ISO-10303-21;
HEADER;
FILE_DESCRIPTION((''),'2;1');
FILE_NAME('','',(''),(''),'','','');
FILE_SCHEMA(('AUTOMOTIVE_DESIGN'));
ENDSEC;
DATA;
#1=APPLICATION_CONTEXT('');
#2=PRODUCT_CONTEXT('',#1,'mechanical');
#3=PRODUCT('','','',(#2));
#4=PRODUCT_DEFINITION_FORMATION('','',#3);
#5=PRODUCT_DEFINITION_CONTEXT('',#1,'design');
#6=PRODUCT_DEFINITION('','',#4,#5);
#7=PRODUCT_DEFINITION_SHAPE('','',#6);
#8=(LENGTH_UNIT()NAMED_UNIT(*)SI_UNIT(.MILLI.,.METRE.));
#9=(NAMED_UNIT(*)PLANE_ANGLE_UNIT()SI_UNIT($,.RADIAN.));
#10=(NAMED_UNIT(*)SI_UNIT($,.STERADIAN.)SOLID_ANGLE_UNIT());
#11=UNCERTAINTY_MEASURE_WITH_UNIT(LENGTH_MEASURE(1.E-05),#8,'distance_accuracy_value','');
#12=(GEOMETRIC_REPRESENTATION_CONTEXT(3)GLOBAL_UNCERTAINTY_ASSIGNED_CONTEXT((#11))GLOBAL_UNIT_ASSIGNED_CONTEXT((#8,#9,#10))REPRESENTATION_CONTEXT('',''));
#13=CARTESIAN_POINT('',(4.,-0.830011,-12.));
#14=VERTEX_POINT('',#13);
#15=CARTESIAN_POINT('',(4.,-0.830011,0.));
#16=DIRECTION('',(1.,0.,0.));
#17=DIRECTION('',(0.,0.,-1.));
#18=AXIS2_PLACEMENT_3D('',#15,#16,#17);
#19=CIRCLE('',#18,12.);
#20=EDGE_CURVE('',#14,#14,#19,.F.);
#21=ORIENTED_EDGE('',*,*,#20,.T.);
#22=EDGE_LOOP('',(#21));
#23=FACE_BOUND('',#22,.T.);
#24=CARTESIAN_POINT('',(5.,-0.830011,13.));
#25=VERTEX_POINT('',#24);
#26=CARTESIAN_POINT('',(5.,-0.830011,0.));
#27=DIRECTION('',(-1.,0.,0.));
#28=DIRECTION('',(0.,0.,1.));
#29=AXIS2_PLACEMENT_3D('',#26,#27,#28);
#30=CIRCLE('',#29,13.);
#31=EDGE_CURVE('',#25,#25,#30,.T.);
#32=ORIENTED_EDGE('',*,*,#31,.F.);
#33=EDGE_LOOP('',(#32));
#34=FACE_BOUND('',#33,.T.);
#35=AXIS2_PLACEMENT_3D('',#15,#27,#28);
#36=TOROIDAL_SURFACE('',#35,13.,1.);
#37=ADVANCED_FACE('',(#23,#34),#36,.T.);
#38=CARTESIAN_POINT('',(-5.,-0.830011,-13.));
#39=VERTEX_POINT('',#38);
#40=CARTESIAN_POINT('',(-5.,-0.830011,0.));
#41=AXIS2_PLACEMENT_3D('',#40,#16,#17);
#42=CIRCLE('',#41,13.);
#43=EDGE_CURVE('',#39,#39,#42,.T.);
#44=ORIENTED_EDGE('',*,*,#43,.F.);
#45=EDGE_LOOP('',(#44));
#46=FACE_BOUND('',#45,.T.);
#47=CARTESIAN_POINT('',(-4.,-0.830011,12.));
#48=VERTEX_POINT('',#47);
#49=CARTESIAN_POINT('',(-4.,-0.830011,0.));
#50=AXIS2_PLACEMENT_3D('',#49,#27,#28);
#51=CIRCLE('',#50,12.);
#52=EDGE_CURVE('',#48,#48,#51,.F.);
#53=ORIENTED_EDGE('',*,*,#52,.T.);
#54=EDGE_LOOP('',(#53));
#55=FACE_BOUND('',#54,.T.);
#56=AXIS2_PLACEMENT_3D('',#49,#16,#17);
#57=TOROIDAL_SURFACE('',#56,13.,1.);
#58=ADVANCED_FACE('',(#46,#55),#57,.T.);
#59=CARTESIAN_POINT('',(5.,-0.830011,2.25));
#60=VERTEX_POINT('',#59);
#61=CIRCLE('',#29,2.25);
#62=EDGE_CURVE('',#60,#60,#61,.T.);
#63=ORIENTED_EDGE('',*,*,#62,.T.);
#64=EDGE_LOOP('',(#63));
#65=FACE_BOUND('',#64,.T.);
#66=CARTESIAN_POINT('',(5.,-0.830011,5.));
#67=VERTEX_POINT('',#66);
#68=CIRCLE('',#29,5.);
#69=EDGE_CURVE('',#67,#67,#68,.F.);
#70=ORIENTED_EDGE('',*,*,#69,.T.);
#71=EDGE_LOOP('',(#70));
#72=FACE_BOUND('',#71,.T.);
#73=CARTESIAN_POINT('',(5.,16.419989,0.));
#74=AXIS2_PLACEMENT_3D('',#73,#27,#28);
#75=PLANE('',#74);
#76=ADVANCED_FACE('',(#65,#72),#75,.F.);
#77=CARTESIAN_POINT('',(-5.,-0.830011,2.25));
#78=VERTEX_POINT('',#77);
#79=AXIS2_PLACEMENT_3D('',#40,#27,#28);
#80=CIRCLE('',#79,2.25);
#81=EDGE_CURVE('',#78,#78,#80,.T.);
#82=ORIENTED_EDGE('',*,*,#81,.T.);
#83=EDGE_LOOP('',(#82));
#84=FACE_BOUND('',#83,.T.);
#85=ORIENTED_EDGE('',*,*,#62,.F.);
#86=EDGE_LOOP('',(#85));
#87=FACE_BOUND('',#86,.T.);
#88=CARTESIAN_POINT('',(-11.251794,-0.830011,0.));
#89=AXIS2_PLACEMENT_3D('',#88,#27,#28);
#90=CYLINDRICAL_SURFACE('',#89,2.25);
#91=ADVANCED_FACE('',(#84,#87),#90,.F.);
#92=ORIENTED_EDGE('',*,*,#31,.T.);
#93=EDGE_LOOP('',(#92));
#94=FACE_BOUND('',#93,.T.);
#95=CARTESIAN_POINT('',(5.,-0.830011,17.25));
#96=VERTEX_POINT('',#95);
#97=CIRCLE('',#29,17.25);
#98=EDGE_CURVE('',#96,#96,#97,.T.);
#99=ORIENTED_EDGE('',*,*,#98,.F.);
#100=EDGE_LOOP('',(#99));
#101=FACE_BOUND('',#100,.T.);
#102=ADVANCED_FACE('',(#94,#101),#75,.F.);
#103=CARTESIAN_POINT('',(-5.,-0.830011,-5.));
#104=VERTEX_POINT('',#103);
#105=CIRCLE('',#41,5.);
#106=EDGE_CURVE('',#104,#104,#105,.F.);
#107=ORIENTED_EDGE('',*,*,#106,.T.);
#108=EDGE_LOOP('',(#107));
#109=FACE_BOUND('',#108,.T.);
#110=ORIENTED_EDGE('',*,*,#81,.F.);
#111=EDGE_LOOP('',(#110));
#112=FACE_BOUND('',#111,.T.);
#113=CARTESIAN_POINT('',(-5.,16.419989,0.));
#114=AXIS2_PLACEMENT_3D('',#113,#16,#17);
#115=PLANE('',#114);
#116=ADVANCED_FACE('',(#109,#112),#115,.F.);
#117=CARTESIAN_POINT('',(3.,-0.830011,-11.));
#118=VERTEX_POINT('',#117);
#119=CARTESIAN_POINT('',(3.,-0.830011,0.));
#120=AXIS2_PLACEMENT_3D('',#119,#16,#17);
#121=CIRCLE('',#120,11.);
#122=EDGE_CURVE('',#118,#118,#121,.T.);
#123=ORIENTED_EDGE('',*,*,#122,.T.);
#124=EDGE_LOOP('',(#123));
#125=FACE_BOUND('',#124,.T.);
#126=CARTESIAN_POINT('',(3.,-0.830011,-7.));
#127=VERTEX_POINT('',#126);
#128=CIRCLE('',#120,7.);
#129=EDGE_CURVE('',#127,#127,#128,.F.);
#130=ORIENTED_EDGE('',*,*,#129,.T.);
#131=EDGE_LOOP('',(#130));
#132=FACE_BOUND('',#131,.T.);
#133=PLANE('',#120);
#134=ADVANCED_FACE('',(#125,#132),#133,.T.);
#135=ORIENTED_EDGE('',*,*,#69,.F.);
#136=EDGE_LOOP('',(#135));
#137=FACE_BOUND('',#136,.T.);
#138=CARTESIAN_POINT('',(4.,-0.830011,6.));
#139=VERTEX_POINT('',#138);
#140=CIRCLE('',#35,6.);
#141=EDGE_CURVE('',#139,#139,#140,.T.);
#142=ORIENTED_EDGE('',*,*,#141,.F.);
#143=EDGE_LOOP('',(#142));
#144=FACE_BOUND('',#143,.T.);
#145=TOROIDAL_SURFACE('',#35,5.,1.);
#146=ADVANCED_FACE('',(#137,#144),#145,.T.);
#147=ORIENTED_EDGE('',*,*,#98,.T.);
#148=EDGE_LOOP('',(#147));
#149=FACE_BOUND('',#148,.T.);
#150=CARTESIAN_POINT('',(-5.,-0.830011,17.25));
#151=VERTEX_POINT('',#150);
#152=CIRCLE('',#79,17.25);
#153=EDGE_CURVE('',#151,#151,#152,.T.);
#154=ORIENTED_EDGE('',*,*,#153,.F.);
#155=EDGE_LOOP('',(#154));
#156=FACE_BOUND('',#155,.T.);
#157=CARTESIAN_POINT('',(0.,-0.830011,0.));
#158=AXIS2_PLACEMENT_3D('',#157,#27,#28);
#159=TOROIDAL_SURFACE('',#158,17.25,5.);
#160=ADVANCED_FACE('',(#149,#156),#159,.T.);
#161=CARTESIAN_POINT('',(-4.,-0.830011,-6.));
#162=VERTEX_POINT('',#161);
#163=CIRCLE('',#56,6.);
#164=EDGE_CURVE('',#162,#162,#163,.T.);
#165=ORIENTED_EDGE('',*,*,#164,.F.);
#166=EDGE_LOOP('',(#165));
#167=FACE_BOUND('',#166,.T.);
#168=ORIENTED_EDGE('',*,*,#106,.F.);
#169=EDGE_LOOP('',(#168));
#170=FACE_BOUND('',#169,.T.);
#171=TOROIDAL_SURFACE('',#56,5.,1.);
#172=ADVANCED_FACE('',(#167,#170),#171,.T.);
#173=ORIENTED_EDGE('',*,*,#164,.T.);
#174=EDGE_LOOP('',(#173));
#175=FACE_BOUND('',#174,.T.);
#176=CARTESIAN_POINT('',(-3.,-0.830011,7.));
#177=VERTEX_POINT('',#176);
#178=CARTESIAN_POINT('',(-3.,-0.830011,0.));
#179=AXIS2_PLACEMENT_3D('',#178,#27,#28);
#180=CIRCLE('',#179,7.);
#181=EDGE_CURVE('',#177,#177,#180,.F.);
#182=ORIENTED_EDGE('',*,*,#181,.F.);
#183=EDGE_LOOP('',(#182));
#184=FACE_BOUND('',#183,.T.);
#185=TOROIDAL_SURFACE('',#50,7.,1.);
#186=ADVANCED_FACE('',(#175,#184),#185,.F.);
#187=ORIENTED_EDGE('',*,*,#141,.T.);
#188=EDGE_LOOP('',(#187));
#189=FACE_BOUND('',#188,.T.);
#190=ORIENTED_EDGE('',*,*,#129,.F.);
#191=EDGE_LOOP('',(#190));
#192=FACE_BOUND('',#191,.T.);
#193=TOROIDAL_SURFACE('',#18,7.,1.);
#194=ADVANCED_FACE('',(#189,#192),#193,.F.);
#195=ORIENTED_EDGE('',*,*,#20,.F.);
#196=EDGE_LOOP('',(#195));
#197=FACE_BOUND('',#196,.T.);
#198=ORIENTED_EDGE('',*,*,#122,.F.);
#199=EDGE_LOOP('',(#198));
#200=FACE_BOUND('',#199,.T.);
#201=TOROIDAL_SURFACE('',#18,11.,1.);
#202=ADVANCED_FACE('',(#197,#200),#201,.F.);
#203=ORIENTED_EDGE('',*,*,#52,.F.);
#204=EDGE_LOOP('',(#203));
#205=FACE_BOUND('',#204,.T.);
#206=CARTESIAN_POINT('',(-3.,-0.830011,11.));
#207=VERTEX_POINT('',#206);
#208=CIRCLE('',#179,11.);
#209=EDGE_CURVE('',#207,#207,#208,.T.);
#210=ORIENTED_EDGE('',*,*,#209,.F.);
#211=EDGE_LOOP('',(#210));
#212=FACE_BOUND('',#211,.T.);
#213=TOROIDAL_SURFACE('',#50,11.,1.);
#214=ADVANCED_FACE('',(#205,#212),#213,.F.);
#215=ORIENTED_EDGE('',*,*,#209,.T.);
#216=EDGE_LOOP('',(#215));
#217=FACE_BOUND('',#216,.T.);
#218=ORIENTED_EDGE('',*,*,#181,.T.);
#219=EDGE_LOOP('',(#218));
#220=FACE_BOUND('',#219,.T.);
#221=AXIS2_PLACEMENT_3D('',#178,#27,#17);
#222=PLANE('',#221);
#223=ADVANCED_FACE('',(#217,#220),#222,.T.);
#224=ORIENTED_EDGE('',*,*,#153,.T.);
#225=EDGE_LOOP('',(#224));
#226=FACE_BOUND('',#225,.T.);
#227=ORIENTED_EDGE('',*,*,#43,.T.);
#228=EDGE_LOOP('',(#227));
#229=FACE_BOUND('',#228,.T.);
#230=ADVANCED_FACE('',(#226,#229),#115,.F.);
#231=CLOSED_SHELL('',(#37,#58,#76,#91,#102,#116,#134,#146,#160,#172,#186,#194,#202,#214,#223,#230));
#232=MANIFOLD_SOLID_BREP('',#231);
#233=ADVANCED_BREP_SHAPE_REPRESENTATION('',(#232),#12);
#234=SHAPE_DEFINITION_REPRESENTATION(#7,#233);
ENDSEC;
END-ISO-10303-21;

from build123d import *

# Parameters (mm, degrees)
SKETCH4_R          = 12
SKETCH4_R_2        = 6
CUT_EXTRUDE2_DEPTH = 2
FILLET1_R          = 1
FILLET2_R          = 1


with BuildPart() as part:
    # Sketch1 → Revolve1 (revolve)
    with BuildSketch(Plane.XY, mode=Mode.PRIVATE) as revolve1_sk:
        with BuildLine():
            Line((-5, 16.419988569), (-5, 1.419988569))
            Line((-5, 1.419988569), (5, 1.419988569))
            Line((5, 1.419988569), (5, 16.419988569))
            ThreePointArc((5, 16.419988569), (0, 21.419988569), (-5, 16.419988569))
        make_face()
    revolve(revolve1_sk.sketch.rotate(Axis((-11.251793618, -0.830011431, 0), (1, 0, 0)), 90), axis=Axis((-11.251793618, -0.830011431, 0), (1, 0, 0)))

    # Sketch4 → Cut-Extrude2 (cut)
    with BuildSketch(Plane(origin=(5, 0, 0), x_dir=(0, 0, -1), z_dir=(1, 0, 0))):
        with Locations((0, -0.830011431)):
            Circle(SKETCH4_R)
        with Locations((0, -0.830011431)):
            Circle(SKETCH4_R_2, mode=Mode.SUBTRACT)
    cut_extrude2 = extrude(amount=-CUT_EXTRUDE2_DEPTH, mode=Mode.SUBTRACT)

    # Fillet1
    fillet1_edges = [part.edges().sort_by_distance(p)[0] for p in [
        (3, -0.830011431, 12),
        (3, -0.830011431, 6),
    ]]
    fillet(fillet1_edges, radius=FILLET1_R)
    fillet1_2_edges = [part.edges().sort_by_distance(p)[0] for p in [
        (5, -0.830011431, 12),
        (5, -0.830011431, 6),
    ]]
    fillet(fillet1_2_edges, radius=FILLET1_R - 0.0001)  # a hair under: the kernel refuses the full size

    # Mirror2: Cut-Extrude2 across plane
    add(cut_extrude2.mirror(Plane(origin=(0, 0, 0), x_dir=(0, 0, 1), z_dir=(1, 0, 0))), mode=Mode.SUBTRACT)

    # Fillet2
    fillet2_edges = [part.edges().sort_by_distance(p)[0] for p in [
        (-3, -0.830011431, 12),
        (-3, -0.830011431, 6),
    ]]
    fillet(fillet2_edges, radius=FILLET2_R)
    fillet2_2_edges = [part.edges().sort_by_distance(p)[0] for p in [
        (-5, -0.830011431, 6),
        (-5, -0.830011431, 12),
    ]]
    fillet(fillet2_2_edges, radius=FILLET2_R - 0.0001)  # a hair under: the kernel refuses the full size


solid = part.part
